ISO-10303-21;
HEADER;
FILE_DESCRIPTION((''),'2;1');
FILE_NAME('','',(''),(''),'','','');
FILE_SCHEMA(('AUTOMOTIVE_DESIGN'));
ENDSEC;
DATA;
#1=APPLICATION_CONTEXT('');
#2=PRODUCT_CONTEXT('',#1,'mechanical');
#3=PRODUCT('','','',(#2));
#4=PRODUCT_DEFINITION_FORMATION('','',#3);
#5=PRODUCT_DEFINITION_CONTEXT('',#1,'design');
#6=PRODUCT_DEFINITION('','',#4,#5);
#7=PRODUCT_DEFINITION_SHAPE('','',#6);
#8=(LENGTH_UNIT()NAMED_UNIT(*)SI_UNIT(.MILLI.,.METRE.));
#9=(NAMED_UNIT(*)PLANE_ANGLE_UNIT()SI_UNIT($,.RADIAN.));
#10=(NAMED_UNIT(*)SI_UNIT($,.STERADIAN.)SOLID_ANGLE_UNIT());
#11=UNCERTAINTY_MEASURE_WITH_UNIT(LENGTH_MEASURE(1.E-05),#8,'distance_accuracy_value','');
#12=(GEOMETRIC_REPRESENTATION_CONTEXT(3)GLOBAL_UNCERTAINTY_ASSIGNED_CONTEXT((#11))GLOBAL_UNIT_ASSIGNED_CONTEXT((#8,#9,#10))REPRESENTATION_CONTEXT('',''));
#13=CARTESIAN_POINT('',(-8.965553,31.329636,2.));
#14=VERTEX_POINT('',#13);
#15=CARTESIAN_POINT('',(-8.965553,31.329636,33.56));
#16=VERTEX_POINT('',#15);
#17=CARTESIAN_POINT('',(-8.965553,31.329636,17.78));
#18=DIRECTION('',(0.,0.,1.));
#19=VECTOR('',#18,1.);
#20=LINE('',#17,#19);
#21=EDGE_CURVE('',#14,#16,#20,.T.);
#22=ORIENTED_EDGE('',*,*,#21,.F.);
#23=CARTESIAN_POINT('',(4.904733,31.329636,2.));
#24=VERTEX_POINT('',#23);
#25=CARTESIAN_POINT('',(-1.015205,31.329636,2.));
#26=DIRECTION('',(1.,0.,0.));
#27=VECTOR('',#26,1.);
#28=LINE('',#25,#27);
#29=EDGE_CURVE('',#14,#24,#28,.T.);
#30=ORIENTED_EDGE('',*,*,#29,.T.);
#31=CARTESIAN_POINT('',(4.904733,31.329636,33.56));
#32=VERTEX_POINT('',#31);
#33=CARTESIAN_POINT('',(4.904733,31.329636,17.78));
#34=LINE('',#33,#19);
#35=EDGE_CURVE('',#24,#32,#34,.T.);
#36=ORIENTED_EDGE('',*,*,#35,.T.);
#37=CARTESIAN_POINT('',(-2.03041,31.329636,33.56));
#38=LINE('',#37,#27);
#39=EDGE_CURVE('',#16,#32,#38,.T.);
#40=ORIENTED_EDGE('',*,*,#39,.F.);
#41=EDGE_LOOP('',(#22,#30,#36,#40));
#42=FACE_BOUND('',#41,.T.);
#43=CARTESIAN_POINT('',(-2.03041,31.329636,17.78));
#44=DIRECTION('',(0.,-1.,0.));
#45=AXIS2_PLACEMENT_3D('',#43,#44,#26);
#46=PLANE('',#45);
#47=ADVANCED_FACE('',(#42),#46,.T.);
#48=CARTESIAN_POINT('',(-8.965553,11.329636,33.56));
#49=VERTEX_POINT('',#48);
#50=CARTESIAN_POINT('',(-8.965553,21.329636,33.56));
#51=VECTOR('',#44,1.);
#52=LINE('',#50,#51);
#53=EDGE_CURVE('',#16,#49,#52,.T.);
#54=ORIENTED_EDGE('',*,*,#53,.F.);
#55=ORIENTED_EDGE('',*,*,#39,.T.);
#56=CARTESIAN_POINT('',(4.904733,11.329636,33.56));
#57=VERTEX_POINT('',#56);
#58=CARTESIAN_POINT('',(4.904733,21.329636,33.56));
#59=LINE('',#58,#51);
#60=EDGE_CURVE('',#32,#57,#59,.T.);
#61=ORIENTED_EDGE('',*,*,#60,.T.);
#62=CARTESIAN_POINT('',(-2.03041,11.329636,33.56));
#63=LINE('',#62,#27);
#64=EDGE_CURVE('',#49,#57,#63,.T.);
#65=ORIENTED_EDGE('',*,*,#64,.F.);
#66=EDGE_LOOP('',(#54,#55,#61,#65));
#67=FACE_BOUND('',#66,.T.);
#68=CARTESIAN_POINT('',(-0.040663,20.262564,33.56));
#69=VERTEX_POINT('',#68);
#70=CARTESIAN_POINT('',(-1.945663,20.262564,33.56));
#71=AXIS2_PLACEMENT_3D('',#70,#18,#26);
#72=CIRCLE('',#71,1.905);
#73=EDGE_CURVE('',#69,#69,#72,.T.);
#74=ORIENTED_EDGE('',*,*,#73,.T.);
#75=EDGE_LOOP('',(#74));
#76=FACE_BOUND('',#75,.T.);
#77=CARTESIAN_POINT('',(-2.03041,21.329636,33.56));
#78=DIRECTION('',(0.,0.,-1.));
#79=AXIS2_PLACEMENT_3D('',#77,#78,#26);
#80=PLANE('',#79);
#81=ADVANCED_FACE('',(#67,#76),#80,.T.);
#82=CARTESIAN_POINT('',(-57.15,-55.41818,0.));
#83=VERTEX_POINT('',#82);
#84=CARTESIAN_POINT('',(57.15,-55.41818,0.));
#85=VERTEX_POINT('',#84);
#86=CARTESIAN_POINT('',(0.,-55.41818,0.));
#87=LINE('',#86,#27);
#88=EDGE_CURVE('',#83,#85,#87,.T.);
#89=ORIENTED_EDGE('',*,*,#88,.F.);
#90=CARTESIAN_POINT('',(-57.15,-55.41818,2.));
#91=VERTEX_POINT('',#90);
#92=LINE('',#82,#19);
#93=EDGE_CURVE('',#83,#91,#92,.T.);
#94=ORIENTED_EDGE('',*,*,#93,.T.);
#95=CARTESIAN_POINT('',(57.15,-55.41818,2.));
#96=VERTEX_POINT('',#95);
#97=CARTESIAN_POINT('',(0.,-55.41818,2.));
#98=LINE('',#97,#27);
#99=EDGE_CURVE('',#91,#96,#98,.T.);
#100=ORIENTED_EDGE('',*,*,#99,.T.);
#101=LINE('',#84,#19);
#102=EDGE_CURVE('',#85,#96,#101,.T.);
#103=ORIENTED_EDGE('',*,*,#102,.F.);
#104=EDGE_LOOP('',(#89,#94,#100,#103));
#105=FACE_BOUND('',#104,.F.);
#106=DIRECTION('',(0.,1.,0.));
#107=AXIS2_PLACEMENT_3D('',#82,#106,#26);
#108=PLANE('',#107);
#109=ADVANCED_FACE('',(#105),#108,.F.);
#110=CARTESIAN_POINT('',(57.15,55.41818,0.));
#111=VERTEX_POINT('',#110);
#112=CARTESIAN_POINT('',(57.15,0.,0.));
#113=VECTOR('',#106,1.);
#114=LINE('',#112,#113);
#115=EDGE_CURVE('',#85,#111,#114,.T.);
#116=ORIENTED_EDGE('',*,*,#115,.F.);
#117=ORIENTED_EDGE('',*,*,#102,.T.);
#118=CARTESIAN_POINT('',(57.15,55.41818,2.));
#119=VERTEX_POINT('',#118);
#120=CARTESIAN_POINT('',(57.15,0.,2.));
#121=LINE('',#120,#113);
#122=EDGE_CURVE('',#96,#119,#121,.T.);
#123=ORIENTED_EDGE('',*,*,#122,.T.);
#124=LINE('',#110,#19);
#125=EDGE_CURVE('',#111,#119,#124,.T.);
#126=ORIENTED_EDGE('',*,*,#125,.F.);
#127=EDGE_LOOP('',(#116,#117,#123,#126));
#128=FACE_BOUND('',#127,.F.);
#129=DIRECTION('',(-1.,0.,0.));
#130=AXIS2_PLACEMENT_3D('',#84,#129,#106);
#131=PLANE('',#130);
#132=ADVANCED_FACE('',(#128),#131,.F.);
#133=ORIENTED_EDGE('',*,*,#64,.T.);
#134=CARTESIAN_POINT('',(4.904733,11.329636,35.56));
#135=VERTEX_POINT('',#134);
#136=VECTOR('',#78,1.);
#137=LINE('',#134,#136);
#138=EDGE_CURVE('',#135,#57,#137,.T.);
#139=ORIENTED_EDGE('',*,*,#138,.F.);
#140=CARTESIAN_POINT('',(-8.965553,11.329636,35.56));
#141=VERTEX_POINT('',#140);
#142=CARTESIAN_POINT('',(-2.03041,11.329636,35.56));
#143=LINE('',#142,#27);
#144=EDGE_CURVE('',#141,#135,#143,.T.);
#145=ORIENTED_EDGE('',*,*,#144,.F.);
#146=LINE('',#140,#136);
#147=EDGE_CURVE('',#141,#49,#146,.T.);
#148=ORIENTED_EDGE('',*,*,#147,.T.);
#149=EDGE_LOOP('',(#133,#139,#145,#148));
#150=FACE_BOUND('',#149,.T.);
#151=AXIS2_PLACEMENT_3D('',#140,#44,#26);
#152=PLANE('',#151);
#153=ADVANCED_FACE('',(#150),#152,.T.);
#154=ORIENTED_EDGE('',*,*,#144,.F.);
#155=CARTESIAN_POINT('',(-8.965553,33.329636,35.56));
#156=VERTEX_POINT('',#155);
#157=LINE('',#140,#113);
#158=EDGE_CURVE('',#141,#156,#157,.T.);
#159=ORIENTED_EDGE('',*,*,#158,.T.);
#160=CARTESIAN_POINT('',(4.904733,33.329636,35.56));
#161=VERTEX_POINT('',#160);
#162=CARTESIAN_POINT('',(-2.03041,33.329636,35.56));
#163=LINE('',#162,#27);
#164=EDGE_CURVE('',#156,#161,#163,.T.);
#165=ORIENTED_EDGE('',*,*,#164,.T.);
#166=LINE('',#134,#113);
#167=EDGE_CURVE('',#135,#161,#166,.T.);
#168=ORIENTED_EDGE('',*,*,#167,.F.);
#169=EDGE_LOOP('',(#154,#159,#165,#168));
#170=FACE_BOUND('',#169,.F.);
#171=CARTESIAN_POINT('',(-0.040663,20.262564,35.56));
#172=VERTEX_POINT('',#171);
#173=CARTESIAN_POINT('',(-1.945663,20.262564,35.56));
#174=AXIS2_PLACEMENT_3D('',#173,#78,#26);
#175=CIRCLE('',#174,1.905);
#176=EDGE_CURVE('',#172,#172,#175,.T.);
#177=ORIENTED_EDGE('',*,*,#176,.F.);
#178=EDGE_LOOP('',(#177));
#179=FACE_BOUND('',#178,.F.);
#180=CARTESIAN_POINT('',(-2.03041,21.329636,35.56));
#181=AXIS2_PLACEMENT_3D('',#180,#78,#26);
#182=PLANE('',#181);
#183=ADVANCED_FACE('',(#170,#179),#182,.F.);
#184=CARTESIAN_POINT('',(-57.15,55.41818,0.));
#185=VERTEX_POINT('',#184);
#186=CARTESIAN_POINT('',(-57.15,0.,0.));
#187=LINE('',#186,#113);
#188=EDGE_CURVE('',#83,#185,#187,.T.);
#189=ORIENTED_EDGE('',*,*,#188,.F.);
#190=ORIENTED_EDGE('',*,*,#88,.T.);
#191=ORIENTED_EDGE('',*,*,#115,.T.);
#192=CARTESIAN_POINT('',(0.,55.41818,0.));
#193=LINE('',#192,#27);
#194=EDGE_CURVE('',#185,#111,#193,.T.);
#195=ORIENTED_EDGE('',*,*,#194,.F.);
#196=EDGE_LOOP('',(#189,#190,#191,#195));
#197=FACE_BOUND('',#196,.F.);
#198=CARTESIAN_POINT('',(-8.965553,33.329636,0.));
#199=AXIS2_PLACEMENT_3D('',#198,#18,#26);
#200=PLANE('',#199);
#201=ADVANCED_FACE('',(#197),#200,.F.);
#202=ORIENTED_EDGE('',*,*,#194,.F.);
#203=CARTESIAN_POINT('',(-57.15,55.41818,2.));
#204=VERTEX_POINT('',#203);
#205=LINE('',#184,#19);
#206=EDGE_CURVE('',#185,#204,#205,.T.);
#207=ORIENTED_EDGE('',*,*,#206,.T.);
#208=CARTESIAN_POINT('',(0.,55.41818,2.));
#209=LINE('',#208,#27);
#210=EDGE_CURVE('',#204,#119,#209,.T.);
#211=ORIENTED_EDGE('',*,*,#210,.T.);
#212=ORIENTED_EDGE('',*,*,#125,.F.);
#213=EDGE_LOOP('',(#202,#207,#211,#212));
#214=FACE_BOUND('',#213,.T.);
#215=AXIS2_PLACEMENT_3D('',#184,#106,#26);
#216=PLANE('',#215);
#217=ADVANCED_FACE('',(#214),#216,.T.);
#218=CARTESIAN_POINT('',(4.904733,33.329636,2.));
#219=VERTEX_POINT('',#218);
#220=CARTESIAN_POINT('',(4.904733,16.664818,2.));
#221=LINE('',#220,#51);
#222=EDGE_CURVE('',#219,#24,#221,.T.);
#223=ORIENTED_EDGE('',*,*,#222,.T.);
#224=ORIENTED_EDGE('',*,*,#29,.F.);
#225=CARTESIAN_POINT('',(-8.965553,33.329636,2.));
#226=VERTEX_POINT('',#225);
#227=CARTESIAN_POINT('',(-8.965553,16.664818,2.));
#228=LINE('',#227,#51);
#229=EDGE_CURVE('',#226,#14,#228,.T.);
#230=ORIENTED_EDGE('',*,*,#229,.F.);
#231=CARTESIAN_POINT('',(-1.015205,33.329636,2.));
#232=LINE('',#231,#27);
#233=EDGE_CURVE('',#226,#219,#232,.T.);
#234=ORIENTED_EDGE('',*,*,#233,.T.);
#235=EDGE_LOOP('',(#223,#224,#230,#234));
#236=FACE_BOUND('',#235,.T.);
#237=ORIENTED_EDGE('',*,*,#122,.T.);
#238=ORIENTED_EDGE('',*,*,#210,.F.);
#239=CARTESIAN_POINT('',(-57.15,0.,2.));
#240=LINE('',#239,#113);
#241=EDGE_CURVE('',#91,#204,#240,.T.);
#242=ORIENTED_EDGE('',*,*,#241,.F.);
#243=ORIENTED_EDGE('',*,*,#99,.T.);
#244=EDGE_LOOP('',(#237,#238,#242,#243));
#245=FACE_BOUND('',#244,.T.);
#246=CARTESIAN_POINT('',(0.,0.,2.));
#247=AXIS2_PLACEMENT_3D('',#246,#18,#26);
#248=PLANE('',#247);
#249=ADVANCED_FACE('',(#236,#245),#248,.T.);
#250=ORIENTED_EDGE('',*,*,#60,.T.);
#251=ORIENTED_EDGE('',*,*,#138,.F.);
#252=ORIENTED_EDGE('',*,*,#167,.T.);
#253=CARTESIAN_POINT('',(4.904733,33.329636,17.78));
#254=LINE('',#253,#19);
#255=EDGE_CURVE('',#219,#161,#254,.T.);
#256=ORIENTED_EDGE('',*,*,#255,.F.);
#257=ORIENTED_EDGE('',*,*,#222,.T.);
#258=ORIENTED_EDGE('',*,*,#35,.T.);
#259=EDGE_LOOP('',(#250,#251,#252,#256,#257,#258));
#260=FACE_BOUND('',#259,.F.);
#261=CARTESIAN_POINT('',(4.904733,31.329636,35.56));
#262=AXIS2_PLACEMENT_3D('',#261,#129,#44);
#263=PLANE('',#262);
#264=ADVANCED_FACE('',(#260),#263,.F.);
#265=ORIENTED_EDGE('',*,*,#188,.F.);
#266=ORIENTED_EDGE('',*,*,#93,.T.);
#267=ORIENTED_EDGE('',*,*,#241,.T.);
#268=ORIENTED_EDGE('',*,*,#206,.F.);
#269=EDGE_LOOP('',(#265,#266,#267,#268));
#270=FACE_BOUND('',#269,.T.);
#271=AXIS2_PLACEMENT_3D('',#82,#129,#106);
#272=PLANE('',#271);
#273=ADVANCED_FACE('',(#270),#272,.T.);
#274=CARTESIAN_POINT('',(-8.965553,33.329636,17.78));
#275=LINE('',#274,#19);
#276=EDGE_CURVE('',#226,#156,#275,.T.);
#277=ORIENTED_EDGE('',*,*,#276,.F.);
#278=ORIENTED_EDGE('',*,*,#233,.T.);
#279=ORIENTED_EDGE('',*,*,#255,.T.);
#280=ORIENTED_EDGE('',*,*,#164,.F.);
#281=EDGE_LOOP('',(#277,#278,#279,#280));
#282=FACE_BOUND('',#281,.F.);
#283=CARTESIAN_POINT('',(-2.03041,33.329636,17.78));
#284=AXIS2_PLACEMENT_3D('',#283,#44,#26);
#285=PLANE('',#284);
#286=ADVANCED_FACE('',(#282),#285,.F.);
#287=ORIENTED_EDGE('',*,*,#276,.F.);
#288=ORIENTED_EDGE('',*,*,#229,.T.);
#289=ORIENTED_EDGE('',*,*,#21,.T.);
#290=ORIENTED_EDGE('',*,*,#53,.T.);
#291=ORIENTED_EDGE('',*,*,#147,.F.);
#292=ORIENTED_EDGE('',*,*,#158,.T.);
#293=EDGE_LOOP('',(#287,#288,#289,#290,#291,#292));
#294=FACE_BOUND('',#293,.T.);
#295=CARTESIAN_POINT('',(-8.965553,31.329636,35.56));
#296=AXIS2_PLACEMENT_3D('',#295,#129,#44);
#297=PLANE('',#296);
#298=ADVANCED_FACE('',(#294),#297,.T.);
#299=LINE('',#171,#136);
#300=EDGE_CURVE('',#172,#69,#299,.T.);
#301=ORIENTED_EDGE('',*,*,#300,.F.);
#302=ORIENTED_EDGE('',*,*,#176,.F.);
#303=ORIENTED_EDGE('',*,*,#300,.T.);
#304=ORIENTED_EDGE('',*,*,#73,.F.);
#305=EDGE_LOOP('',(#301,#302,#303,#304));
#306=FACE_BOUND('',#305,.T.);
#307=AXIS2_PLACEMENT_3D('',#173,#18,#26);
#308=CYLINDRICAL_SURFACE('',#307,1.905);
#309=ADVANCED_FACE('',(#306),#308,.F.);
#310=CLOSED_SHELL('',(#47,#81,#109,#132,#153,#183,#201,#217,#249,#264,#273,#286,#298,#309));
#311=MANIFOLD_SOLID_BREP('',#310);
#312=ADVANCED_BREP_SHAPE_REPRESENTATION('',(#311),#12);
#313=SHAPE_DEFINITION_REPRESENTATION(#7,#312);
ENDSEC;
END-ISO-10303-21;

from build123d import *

# Parameters (mm, degrees)
F0_W          = 114.3
F0_H          = 110.8363599028
F2_DEPTH      = 2
F1_E1_W       = 13.8702858239
F1_E1_H       = 35.56
F3_DEPTH      = 2
F5_E4_W       = 13.8702858239
F5_E4_H       = 20
F6_DEPTH      = 2
F7_R          = 1.905
F8_DEPTH      = 6.858
F8_DEPTH_BACK = 2.032


with BuildPart() as f2:
    # F0 (on Top) → F2 (new body)
    with BuildSketch(Plane.XY):
        Rectangle(F0_W, F0_H)
    extrude(amount=F2_DEPTH)

    # F1_E1 (on explicit) → F3 (join)
    with BuildSketch(Plane(origin=(-8.9655527845, 33.3296358585, 0), x_dir=(1, 0, 0), z_dir=(0, -1, 0))):
        with Locations((6.935142912, 17.78)):
            Rectangle(F1_E1_W, F1_E1_H)
    extrude(amount=F3_DEPTH)

    # F5_E4 (on explicit) → F6 (join)
    with BuildSketch(Plane(origin=(-8.9655527845, 31.3296358585, 35.56), x_dir=(1, 0, 0), z_dir=(0, 0, -1))):
        with Locations((6.935142912, 10)):
            Rectangle(F5_E4_W, F5_E4_H)
    extrude(amount=F6_DEPTH)

    # F7 (on face) → F8 (cut, two sides)
    with BuildSketch(Plane(origin=(0, 0, 35.56), x_dir=(1, 0, 0), z_dir=(0, 0, -1))) as f8_sk:
        with Locations((-1.9456632435, -20.2625636011)):
            Circle(F7_R)
    extrude(amount=F8_DEPTH, mode=Mode.SUBTRACT)
    extrude(f8_sk.sketch, amount=-F8_DEPTH_BACK, mode=Mode.SUBTRACT)


solid = f2.part
